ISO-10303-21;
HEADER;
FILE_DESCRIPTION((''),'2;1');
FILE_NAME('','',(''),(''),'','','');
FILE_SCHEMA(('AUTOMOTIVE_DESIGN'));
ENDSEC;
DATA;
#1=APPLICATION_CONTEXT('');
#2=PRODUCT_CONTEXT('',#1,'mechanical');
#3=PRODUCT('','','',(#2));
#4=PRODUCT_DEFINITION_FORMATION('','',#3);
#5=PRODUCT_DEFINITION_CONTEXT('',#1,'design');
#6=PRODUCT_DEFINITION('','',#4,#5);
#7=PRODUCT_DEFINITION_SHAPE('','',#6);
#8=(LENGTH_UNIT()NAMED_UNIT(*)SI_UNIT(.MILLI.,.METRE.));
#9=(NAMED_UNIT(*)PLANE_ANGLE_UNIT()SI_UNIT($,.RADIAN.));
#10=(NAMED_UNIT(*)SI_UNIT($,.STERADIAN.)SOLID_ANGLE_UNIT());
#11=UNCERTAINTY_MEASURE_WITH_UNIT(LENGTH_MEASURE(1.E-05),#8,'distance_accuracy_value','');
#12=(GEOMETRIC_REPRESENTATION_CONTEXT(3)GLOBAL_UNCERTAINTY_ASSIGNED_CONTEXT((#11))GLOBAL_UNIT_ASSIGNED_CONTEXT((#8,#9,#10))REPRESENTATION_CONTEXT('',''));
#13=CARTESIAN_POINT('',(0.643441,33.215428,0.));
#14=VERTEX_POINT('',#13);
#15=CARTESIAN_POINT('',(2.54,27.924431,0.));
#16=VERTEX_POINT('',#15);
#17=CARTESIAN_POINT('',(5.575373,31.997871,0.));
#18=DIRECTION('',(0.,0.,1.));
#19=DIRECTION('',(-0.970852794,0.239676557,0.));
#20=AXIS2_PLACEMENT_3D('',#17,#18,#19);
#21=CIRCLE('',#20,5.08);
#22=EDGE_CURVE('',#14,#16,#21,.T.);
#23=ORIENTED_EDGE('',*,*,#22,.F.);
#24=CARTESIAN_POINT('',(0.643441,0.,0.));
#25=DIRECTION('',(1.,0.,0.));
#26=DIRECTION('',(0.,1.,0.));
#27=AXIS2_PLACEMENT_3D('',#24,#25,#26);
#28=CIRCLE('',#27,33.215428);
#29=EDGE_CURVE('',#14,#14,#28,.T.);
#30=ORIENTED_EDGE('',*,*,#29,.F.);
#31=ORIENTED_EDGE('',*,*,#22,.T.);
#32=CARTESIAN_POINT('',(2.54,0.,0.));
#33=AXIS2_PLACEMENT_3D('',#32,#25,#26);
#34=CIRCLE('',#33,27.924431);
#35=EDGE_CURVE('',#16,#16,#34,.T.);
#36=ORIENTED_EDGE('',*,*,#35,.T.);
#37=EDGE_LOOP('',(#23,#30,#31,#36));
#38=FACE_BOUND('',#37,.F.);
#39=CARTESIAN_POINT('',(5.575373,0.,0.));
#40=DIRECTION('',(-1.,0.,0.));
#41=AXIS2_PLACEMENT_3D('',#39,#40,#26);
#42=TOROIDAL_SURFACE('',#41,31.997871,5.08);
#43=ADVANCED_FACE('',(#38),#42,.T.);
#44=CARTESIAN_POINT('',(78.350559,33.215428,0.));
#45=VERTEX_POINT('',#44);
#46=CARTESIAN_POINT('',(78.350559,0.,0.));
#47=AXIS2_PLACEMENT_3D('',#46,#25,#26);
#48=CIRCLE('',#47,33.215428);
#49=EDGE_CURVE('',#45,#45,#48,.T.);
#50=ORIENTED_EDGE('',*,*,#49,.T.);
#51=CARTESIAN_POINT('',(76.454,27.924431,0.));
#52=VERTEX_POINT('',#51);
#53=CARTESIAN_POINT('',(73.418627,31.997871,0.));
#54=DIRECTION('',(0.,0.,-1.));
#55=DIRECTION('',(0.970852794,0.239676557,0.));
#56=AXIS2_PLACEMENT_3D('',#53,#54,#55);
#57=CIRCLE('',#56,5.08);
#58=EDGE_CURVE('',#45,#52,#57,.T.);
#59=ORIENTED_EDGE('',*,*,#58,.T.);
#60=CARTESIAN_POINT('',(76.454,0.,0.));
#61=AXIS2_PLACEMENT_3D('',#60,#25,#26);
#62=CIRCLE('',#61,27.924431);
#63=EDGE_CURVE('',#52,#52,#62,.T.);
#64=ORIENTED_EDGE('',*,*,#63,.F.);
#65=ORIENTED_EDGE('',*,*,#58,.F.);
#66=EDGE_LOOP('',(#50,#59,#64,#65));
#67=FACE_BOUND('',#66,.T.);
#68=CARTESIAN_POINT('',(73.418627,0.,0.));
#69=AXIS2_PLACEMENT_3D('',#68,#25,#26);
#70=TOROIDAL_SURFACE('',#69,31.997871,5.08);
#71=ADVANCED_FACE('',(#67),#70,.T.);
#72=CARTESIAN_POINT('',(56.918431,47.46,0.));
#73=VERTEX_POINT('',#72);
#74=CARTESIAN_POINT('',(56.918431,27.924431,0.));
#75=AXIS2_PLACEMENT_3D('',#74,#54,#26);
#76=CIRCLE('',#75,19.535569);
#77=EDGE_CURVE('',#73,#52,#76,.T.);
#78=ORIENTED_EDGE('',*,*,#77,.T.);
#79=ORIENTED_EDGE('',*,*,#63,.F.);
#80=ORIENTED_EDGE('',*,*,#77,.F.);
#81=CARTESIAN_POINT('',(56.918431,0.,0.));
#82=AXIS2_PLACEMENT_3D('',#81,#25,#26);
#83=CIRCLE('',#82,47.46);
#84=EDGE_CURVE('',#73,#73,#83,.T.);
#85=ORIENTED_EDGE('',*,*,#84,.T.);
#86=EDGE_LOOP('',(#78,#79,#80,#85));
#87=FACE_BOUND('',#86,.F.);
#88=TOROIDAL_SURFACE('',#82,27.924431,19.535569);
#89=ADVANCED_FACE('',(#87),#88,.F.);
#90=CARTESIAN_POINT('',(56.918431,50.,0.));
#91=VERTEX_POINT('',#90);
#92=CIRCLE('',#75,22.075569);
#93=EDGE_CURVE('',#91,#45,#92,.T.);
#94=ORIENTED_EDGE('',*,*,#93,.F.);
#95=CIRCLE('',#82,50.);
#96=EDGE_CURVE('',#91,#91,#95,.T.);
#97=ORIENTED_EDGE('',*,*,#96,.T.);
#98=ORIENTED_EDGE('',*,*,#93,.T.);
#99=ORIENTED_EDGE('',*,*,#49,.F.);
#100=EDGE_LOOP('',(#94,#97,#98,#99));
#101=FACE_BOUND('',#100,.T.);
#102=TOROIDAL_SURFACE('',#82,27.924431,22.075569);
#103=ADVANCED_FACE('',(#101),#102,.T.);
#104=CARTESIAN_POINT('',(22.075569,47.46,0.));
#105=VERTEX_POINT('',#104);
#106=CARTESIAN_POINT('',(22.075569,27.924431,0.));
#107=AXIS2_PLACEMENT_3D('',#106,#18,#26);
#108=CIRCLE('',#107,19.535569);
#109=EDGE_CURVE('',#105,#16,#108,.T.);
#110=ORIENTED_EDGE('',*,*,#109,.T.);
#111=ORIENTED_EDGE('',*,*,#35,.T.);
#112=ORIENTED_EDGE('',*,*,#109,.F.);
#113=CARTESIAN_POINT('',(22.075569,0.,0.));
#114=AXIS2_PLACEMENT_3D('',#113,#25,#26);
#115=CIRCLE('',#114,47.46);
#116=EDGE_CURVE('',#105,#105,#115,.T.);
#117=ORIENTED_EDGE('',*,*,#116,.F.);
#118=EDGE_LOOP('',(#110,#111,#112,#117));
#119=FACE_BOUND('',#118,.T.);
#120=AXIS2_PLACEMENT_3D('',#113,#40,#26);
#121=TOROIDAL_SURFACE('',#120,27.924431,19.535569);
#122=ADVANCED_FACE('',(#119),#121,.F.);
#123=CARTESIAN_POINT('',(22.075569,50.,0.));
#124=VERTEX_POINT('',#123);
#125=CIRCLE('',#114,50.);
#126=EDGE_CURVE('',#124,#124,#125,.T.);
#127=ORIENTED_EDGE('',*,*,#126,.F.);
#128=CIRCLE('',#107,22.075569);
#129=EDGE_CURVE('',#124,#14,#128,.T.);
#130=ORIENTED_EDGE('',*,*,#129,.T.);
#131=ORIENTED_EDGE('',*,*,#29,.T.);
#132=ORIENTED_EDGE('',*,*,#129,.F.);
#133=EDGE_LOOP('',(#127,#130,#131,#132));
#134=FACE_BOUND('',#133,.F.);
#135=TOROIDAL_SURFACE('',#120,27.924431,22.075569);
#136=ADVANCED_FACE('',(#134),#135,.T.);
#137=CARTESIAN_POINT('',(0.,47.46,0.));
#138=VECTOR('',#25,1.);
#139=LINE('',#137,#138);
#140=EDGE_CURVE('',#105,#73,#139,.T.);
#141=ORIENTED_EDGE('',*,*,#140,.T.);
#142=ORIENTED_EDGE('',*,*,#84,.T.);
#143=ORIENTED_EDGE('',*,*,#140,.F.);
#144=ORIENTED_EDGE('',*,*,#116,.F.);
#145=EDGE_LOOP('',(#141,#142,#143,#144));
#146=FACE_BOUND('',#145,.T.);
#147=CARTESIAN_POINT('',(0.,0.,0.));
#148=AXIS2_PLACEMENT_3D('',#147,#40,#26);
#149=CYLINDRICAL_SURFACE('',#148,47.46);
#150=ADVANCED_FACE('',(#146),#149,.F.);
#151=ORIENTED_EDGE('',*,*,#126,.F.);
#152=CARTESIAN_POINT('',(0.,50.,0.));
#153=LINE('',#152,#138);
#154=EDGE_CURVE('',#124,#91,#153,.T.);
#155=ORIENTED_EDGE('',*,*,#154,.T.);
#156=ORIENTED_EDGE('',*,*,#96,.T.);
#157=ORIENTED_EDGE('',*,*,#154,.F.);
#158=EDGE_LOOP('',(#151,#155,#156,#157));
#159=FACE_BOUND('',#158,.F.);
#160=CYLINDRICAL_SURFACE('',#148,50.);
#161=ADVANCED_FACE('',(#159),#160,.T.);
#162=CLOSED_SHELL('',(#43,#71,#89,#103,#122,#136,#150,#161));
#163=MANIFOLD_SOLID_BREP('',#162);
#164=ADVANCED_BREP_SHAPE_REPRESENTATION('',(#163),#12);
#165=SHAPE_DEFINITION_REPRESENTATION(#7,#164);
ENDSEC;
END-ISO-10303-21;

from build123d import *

# Parameters (mm, degrees)
F0_R     = 50
F1_DEPTH = 78.994
F2_R     = 22.0755688143
F3_T     = -2.54


# Not quite as in the source:
# - a fillet or chamfer that OpenCascade refuses, or shapes differently, is made with other operations: its cross-section is extruded or revolved along the edge and cut away or added


with BuildPart() as f1:
    # F0 (on Right) → F1 (new body)
    with BuildSketch(Plane.YZ):
        Circle(F0_R)
    extrude(amount=F1_DEPTH)

    # F2
    f2_edges = [f1.edges().sort_by_distance(p)[0] for p in [
        (78.994, -50, 0),
        (0, -50, 0),
        (39.497, 50, 0),
    ]]
    fillet(f2_edges, radius=F2_R)

    # F3: a shell. OpenCascade refuses it in one call, so the cavity is built on its own and cut out:
    # the body offset inwards by the wall thickness, plus a prism from it out through each open face.
    f3_core = offset(f1.part, amount=F3_T, mode=Mode.PRIVATE)
    f3_exits = [f3_core.faces().sort_by_distance(p)[0] for p in [
        (76.454, 0, 0),
        (2.54, 0, 0),
    ]]
    add(f3_core, mode=Mode.SUBTRACT)
    extrude(f3_exits, amount=-F3_T, mode=Mode.SUBTRACT)

    # F4: fillet of radius 5.08 on 6 edges, made by hand

    # F4_s1 → F4_t2 (revolve, cut)
    with BuildSketch(Plane.XY):
        with BuildLine():
            ThreePointArc((0.6434411467, 33.2154275111), (0.793307898, 30.2837381407), (2.54, 27.9244311857))
            Line((2.54, 27.9244311857), (0, 27.9244311857))
            ThreePointArc((0, 27.9244311857), (0.1614506751, 30.5894198641), (0.6434411467, 33.2154275111))
        make_face()
    revolve(axis=Axis((0, 0, 0), (1, 0, 0)), mode=Mode.SUBTRACT)

    # F4_s3 → F4_t4 (revolve, cut)
    with BuildSketch(Plane.XY):
        with BuildLine():
            ThreePointArc((78.3505588533, 33.2154275111), (78.200692102, 30.2837381407), (76.454, 27.9244311857))
            Line((76.454, 27.9244311857), (78.994, 27.9244311857))
            ThreePointArc((78.994, 27.9244311857), (78.8325493249, 30.5894198641), (78.3505588533, 33.2154275111))
        make_face()
    revolve(axis=Axis((78.994, 0, 0), (1, 0, 0)), mode=Mode.SUBTRACT)


solid = f1.part
